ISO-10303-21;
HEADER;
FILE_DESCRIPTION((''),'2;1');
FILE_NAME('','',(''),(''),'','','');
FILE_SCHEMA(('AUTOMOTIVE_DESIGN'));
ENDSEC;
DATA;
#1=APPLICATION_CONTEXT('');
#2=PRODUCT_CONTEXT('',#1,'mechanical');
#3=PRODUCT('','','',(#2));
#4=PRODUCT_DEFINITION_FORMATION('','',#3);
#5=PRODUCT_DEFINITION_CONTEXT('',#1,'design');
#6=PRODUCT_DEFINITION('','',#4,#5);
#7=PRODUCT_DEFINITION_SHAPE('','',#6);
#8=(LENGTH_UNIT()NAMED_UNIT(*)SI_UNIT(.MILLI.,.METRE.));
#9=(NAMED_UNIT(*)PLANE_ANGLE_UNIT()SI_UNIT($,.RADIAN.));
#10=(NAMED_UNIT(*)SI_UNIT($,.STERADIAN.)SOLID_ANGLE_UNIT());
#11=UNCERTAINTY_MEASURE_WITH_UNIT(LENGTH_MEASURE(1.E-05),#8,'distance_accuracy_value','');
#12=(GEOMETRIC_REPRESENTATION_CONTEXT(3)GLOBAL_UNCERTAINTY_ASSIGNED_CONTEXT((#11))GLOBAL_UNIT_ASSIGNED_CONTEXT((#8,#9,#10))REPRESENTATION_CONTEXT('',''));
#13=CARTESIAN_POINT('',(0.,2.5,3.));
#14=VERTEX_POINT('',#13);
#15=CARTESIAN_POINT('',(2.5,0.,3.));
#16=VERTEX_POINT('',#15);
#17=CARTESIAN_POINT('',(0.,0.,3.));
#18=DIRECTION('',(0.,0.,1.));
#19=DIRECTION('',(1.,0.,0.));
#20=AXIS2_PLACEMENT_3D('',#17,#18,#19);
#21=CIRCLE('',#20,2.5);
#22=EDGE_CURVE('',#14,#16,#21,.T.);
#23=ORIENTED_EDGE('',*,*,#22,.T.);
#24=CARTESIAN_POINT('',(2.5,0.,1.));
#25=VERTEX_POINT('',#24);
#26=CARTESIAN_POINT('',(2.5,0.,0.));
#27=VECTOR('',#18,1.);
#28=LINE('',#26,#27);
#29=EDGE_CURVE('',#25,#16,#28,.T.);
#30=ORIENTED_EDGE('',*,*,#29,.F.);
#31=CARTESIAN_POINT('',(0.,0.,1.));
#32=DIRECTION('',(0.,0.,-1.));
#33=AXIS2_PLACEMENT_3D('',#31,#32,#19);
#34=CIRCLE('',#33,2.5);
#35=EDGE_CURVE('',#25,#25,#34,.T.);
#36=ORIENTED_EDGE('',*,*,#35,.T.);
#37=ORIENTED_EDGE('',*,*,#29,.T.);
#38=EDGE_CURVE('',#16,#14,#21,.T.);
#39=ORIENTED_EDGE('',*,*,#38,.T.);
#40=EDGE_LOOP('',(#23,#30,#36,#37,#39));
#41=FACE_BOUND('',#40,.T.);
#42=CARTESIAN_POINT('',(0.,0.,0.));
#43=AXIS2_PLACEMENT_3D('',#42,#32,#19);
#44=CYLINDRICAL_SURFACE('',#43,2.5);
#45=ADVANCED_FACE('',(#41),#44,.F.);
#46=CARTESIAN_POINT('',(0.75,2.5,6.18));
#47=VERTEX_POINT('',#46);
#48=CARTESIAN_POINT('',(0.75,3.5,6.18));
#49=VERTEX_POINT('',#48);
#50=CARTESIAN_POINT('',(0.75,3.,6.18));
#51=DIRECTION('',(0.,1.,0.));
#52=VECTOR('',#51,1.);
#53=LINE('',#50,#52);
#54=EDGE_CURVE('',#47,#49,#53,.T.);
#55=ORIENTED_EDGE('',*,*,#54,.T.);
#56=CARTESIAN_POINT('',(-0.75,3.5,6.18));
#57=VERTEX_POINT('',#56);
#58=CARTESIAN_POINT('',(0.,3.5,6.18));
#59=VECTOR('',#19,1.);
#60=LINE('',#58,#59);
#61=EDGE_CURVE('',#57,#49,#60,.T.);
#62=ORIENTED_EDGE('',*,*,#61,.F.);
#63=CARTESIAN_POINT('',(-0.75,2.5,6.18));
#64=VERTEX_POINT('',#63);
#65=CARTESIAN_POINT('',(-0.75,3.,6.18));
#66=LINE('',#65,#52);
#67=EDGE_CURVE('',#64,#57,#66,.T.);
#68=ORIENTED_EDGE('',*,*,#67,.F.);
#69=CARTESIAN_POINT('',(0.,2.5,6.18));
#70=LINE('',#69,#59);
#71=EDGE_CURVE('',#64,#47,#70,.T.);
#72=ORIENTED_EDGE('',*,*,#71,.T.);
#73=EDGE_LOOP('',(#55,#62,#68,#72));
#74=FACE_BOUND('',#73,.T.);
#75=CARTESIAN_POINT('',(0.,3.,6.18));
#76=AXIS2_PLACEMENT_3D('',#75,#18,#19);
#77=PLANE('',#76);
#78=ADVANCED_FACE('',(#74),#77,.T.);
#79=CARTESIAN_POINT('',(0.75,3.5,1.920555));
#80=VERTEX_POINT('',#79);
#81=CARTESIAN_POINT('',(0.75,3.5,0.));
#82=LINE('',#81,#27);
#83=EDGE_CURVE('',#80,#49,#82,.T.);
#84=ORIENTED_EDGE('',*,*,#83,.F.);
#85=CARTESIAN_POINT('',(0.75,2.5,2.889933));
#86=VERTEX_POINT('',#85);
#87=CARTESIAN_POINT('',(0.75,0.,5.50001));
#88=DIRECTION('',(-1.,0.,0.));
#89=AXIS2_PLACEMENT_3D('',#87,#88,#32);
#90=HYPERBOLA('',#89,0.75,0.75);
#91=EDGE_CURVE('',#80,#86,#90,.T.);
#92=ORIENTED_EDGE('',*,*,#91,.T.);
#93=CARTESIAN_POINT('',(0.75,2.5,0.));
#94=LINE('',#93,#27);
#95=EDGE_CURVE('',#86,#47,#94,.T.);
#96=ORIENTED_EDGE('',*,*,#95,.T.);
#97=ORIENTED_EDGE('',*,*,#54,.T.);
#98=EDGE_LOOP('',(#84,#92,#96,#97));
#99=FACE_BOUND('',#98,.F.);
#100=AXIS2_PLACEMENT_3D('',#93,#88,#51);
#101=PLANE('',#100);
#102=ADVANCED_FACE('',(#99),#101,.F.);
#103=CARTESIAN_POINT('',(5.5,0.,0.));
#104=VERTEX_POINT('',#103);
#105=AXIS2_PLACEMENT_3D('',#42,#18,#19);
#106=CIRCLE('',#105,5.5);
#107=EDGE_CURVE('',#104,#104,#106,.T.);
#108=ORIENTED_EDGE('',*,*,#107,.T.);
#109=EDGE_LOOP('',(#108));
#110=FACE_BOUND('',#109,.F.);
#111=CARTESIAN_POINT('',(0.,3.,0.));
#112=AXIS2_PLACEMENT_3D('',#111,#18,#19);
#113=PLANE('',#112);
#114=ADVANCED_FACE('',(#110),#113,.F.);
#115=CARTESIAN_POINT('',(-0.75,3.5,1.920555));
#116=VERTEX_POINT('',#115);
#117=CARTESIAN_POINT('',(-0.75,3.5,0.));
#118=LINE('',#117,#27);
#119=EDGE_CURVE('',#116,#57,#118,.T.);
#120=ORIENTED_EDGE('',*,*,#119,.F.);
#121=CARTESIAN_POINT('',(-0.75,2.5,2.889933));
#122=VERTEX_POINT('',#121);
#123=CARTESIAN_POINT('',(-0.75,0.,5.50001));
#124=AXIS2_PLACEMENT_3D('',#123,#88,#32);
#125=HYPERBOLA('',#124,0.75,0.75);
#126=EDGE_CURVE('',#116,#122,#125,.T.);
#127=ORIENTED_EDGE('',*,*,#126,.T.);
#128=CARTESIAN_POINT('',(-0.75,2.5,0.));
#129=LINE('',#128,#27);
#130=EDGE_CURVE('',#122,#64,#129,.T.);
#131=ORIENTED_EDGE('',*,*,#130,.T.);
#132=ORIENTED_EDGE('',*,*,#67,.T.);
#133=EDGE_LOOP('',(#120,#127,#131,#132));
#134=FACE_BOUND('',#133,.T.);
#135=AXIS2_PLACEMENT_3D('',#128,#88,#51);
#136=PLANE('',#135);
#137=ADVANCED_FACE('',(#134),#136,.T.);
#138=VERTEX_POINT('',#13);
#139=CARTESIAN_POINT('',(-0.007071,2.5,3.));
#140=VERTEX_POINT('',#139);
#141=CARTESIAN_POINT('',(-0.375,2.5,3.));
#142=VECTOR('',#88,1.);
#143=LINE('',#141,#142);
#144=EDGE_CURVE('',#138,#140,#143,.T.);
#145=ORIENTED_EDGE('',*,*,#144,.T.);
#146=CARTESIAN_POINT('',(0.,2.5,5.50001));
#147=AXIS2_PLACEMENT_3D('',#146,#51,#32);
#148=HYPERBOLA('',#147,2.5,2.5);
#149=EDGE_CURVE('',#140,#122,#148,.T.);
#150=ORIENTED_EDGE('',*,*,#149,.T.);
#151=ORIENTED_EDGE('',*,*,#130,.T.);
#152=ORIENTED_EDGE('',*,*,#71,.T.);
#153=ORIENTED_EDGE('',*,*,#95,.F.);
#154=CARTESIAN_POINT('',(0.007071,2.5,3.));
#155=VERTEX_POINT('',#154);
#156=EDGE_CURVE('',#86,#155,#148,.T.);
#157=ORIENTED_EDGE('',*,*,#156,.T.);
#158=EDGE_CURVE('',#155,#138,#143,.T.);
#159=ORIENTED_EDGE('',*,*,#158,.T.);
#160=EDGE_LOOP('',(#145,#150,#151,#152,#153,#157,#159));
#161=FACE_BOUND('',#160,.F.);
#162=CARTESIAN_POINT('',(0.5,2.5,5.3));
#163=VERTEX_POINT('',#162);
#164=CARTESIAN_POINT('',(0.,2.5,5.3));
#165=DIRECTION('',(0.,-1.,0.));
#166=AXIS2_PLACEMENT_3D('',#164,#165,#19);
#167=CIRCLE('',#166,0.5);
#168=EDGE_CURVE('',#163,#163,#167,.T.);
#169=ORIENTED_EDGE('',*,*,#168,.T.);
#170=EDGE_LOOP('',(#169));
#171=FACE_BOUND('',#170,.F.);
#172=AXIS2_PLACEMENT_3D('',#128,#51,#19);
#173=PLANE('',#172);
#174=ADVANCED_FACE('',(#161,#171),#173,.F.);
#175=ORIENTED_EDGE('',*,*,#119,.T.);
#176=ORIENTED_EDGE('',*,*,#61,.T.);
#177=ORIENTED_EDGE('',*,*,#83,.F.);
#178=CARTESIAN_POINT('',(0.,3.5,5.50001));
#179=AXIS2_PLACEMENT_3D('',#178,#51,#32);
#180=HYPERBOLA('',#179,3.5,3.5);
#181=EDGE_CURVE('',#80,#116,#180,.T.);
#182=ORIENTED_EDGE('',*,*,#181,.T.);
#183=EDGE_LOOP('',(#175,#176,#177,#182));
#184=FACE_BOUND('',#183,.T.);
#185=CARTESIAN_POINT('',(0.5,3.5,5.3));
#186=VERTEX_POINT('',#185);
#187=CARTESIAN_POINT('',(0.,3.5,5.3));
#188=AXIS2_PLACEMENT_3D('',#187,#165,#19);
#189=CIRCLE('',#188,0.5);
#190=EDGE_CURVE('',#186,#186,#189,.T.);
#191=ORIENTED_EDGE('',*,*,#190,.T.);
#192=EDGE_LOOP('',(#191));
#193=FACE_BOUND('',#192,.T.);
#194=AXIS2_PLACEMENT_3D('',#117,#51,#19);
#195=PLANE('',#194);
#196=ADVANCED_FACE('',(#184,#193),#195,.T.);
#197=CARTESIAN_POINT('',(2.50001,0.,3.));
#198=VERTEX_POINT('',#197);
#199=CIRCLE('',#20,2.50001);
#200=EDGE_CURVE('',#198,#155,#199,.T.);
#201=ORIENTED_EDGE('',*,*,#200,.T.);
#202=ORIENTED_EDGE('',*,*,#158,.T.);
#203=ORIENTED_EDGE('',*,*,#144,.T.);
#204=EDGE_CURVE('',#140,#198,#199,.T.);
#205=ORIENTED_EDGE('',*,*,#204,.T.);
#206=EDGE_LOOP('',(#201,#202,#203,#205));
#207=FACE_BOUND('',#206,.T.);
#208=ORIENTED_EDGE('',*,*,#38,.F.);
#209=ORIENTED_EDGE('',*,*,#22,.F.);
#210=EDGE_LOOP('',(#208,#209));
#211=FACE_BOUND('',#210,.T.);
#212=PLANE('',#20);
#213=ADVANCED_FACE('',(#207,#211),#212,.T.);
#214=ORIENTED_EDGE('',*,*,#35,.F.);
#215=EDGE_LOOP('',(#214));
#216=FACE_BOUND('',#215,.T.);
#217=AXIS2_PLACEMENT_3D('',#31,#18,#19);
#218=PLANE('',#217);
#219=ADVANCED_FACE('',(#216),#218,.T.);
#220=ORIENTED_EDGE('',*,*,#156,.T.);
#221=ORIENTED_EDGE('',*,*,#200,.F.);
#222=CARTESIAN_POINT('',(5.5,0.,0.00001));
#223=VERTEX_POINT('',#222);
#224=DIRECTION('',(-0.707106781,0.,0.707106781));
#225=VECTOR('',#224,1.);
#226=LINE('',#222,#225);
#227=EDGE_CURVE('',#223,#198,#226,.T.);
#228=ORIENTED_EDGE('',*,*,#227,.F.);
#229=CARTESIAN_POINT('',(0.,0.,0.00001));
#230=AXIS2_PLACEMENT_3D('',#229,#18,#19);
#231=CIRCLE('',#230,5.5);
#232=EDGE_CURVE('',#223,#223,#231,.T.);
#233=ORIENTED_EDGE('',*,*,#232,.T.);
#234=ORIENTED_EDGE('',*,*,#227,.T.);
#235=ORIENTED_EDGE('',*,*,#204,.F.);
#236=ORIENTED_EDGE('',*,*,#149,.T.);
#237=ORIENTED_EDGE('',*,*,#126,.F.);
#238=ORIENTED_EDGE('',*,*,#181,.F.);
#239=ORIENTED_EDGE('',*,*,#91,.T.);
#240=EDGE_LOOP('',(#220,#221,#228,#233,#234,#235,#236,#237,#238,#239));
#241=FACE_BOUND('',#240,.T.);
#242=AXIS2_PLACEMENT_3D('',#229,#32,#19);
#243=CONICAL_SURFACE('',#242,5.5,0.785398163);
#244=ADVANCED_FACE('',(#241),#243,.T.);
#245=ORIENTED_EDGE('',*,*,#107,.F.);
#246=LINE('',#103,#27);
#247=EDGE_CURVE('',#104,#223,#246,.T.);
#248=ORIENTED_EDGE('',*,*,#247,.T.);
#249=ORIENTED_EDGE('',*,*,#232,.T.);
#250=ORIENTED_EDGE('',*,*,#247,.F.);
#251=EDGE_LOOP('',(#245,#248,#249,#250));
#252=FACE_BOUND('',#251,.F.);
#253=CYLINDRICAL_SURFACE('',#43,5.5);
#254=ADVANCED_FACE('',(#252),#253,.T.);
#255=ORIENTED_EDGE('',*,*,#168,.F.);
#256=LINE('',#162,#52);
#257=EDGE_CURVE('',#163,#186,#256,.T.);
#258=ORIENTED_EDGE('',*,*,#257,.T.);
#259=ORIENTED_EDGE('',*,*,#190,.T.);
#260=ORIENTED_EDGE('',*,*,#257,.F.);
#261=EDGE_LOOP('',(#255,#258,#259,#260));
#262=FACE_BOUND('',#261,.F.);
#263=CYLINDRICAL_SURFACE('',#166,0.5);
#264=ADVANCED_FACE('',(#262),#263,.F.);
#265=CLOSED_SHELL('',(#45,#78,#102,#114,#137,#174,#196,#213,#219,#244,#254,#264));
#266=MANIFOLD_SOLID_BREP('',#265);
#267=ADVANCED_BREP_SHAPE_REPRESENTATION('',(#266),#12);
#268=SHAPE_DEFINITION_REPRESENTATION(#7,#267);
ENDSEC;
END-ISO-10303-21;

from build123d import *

# Parameters (mm, degrees)
F0_R     = 5.5
F0_R_2   = 2.5
F1_DEPTH = 3
F2_DEPTH = 1
F3_SIZE  = 2.99999
F4_W     = 1.5
F4_H     = 1
F5_DEPTH = 6.18
F6_R     = 0.5
F7_DEPTH = 25


# Not quite as in the source:
# - a fillet or chamfer is up to 0.001 mm smaller than in the source, because OpenCascade refuses the exact size


with BuildPart() as f1:
    # F0 (on Top) → F1 (new body)
    with BuildSketch(Plane.XY):
        Circle(F0_R)
        Circle(F0_R_2, mode=Mode.SUBTRACT)
    extrude(amount=F1_DEPTH)

    # F0 (on Top) → F2 (join)
    with BuildSketch(Plane.XY):
        Circle(F0_R_2)
    extrude(amount=F2_DEPTH)

    # F3 (size 3 in the source; OpenCascade refuses exactly that, so slightly less here)
    f3_edges = [f1.edges().sort_by_distance(p)[0] for p in [
        (-5.5, 0, 3),
    ]]
    chamfer(f3_edges, length=F3_SIZE)

    # F4 (on Top) → F5 (join)
    with BuildSketch(Plane.XY):
        with Locations((0, 3)):
            Rectangle(F4_W, F4_H)
    extrude(amount=F5_DEPTH)

    # F6 (on face) → F7 (cut)
    with BuildSketch(Plane.XZ.offset(-2.5)):
        with Locations((0, 5.3)):
            Circle(F6_R)
    extrude(amount=-F7_DEPTH, mode=Mode.SUBTRACT)


solid = f1.part
